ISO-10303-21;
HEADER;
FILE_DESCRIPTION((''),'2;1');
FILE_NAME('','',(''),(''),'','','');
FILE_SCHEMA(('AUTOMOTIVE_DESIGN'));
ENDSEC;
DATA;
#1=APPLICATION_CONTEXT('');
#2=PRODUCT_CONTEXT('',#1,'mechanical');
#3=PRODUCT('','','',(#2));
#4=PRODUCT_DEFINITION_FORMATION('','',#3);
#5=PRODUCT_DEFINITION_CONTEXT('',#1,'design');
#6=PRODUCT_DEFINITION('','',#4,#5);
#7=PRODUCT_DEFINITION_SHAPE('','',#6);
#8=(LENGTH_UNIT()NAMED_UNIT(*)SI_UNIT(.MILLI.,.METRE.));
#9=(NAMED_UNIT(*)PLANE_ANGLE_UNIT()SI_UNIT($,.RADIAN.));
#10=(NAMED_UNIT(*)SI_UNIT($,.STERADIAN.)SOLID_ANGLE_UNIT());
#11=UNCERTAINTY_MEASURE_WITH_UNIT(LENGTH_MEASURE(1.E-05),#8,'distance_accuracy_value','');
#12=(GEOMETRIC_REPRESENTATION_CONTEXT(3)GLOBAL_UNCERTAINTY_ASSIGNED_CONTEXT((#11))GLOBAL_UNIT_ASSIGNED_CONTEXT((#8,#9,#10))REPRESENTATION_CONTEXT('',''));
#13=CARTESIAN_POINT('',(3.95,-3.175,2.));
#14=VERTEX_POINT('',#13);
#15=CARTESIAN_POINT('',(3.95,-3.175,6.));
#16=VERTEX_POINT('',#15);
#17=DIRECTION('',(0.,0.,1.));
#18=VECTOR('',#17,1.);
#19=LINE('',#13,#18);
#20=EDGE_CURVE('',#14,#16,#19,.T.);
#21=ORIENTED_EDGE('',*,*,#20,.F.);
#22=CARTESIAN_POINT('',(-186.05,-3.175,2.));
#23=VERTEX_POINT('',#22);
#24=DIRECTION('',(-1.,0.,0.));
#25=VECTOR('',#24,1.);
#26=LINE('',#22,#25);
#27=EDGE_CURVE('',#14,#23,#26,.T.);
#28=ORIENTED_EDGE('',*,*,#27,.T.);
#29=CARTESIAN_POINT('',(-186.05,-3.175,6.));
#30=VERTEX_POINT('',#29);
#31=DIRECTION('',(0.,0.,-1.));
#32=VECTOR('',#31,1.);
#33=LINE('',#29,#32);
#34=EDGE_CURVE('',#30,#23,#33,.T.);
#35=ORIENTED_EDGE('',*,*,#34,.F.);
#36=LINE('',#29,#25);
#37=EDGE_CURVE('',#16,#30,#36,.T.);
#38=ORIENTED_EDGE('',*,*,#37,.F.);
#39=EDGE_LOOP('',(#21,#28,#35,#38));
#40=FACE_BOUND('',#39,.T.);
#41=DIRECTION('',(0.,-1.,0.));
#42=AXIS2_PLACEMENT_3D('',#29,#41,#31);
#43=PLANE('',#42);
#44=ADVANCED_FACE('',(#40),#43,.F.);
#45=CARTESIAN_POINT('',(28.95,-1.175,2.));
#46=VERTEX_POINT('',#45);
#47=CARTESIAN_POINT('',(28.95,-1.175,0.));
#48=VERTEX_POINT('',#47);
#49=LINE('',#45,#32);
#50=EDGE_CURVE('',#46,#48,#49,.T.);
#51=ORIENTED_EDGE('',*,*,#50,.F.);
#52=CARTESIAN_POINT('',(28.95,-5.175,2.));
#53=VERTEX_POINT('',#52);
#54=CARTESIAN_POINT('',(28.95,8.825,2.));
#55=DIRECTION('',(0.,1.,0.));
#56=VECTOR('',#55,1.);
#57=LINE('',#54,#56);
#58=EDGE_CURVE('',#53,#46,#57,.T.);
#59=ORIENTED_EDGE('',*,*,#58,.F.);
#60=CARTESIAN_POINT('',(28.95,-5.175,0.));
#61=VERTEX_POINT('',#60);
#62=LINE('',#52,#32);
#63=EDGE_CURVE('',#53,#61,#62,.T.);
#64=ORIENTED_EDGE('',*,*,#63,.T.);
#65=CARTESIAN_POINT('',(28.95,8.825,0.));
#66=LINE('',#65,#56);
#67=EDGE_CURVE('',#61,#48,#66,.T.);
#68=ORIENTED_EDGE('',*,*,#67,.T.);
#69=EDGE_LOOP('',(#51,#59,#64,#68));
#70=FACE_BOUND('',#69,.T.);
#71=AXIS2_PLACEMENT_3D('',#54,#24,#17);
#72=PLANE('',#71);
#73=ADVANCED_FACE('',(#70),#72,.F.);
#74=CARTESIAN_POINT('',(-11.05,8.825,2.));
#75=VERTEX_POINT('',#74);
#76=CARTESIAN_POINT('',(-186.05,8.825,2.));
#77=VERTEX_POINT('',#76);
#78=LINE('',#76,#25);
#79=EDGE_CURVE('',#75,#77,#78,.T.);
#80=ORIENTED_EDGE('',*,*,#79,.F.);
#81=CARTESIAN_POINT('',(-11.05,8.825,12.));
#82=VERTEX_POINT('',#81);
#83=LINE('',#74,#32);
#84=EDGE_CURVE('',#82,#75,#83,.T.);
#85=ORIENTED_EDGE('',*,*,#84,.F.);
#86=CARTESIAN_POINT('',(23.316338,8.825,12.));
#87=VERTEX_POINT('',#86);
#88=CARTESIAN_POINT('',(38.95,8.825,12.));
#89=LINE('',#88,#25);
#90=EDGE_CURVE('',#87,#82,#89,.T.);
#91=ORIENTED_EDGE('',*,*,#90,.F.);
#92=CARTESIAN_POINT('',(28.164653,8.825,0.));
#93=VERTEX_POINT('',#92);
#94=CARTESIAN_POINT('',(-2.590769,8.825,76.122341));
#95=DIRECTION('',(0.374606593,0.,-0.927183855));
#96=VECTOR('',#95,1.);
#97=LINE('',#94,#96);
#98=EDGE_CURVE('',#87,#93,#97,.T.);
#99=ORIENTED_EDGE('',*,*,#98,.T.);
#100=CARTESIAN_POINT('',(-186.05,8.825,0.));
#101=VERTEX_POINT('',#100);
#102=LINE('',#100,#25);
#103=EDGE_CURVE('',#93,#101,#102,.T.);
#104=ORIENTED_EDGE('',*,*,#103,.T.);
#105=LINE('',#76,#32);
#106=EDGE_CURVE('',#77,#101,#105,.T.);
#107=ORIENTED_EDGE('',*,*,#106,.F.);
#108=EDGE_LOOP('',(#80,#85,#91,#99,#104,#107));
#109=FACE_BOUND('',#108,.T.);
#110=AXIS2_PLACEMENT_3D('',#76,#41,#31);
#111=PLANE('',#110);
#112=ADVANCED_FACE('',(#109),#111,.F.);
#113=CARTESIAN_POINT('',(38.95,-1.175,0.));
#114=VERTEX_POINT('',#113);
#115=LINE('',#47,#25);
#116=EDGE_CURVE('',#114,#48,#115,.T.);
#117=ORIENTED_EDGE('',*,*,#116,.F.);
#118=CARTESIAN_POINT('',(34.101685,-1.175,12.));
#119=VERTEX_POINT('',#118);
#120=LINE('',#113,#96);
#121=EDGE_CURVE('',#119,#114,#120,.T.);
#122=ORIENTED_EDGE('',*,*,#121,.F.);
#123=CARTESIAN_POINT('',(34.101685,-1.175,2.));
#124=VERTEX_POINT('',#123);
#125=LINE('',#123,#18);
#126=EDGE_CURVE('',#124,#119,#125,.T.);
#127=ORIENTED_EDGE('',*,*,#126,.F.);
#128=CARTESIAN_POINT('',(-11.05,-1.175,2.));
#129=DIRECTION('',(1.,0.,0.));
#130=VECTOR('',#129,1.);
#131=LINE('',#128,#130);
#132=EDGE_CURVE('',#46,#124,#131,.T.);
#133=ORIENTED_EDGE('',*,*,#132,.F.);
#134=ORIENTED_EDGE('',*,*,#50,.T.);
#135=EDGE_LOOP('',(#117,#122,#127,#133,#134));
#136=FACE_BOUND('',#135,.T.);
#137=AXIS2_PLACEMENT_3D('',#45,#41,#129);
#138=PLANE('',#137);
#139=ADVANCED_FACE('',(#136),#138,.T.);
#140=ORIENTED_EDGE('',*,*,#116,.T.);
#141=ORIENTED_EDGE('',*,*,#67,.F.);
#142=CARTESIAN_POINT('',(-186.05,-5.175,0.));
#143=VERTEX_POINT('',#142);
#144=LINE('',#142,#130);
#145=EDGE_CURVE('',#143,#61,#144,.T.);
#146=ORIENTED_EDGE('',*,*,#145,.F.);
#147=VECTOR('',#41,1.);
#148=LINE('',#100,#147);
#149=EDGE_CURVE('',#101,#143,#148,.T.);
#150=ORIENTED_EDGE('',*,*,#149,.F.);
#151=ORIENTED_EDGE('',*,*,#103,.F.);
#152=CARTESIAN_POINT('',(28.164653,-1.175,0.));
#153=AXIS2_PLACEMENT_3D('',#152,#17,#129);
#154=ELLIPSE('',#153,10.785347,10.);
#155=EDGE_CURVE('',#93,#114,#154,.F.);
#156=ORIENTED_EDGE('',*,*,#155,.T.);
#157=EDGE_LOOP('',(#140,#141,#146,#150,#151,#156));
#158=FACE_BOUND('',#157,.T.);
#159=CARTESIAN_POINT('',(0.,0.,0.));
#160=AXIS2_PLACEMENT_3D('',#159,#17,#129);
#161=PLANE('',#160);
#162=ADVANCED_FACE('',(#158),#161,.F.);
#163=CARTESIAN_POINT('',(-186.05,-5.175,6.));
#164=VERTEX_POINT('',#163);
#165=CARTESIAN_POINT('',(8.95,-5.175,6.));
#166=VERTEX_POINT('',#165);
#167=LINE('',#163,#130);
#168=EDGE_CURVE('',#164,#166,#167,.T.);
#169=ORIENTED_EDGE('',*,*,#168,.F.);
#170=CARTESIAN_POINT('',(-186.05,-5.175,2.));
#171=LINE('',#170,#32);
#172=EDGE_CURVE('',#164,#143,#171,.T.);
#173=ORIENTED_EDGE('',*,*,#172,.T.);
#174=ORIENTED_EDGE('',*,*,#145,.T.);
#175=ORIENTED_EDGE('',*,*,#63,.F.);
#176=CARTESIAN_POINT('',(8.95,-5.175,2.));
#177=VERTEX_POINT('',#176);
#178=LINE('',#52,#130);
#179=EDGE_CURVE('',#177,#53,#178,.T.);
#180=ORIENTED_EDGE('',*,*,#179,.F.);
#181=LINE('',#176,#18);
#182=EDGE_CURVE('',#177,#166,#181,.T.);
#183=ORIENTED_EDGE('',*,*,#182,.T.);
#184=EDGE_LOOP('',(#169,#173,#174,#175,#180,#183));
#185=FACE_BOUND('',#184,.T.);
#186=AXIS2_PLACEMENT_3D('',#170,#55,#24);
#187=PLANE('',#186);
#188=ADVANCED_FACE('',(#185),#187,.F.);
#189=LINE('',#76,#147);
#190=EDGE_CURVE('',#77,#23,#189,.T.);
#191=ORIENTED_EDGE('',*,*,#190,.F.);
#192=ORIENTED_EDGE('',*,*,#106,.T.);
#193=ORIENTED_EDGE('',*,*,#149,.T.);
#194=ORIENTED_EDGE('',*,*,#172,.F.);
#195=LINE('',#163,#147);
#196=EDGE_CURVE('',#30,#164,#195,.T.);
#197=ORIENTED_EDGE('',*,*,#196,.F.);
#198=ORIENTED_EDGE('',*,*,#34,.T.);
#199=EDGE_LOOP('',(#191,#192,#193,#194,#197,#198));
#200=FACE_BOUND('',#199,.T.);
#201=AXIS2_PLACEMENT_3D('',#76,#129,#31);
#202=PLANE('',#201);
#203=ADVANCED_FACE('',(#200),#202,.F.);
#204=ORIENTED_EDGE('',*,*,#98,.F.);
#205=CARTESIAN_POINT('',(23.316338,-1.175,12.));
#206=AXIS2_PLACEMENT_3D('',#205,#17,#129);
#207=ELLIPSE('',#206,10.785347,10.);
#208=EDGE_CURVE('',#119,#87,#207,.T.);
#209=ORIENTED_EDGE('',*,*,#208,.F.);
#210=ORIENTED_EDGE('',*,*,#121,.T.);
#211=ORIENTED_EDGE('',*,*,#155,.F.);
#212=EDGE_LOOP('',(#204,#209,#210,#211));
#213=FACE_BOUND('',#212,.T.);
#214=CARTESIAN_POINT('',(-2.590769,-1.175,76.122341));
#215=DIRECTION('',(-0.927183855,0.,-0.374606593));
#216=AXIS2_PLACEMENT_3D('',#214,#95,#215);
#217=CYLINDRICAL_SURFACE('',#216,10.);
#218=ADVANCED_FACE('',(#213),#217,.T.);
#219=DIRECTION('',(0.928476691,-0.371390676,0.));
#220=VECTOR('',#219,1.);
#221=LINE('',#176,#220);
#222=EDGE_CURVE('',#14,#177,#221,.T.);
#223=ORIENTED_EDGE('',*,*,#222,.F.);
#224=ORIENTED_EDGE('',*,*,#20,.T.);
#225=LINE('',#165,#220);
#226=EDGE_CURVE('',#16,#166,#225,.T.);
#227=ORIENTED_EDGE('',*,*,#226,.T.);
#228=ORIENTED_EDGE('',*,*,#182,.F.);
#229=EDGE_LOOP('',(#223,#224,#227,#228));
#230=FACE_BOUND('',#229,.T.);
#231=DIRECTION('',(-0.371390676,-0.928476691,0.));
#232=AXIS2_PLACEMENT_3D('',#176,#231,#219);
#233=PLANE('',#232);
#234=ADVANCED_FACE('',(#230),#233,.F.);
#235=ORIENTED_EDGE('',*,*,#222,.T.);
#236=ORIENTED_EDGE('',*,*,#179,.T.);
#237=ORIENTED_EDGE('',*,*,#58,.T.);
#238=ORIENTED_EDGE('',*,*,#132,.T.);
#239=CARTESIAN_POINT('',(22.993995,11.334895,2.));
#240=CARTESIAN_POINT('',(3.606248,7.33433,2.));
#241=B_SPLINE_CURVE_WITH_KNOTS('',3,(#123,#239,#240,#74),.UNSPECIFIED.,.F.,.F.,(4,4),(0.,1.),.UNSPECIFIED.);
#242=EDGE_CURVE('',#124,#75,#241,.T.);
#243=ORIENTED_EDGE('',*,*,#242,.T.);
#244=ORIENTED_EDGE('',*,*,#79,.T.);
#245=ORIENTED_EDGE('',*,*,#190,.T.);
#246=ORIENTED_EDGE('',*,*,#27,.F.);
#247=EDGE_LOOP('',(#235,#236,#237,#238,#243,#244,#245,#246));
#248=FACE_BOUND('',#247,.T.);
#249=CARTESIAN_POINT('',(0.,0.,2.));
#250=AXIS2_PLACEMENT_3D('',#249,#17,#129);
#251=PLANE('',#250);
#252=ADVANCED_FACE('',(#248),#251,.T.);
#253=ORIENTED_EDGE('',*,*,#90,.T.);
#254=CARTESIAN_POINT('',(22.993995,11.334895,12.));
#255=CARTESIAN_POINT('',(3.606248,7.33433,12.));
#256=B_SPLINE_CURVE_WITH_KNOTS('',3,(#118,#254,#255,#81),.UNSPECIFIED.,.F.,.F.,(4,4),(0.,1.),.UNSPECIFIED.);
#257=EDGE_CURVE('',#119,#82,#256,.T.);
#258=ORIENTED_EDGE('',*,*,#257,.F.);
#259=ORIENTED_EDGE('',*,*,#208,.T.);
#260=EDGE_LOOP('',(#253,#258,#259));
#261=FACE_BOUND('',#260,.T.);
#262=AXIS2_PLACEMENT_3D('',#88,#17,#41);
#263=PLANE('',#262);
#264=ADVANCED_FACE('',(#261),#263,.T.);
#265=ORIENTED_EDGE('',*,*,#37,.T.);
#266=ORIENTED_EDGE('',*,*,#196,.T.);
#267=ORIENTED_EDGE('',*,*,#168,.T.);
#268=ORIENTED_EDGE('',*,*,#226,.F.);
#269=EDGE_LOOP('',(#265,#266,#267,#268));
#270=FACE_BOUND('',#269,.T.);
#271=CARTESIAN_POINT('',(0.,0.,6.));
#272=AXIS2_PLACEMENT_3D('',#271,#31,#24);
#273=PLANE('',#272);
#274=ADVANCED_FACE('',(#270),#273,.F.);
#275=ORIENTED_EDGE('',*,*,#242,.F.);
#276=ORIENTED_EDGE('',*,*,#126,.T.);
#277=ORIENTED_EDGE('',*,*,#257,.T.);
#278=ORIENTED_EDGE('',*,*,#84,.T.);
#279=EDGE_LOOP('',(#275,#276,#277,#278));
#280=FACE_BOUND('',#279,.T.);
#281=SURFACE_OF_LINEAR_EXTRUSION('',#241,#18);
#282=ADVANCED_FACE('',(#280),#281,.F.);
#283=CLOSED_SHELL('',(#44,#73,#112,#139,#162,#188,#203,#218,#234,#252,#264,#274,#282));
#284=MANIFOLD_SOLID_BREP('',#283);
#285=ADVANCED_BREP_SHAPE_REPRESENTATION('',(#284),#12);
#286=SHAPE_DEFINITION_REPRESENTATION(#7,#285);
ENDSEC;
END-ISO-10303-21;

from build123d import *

# Parameters (mm, degrees)
SKETCH1_W           = 215
SKETCH1_H           = 14
BOSS_EXTRUDE1_DEPTH = 2
SKETCH2_W           = 215
SKETCH2_H           = 2
BOSS_EXTRUDE2_DEPTH = 4
SKETCH3_W           = 10
SKETCH3_H           = 10
BOSS_EXTRUDE3_DEPTH = 2
CUT_EXTRUDE1_DEPTH  = 4
BOSS_EXTRUDE4_START = -175
SKETCH8_W           = 10
SKETCH8_H           = 10
BOSS_EXTRUDE4_DEPTH = 50
CUT_EXTRUDE5_DEPTH  = 50
FILLET2_R           = 10
CUT_EXTRUDE6_DEPTH  = 10


with BuildPart() as part:
    # Sketch1 → Boss-Extrude1 (new body)
    with BuildSketch(Plane.XY):
        with Locations((-78.55, 1.825)):
            Rectangle(SKETCH1_W, SKETCH1_H)
    extrude(amount=BOSS_EXTRUDE1_DEPTH)

    # Sketch2 → Boss-Extrude2 (add)
    with BuildSketch(Plane.XY.offset(2)):
        with Locations((-78.55, -4.175)):
            Rectangle(SKETCH2_W, SKETCH2_H)
    extrude(amount=BOSS_EXTRUDE2_DEPTH)

    # Sketch3 → Boss-Extrude3 (add)
    with BuildSketch(Plane(origin=(0, 0, 0), x_dir=(-1, 0, 0), z_dir=(0, 0, -1))):
        with Locations((-33.95, 3.825)):
            Rectangle(SKETCH3_W, SKETCH3_H)
    extrude(amount=-BOSS_EXTRUDE3_DEPTH)

    # Sketch4 → Cut-Extrude1 (cut)
    with BuildSketch(Plane.XY.offset(6)):
        Polygon((28.95, -5.175), (8.95, -5.175), (3.95, -3.175), (28.95, -3.175), align=None)
    extrude(amount=-CUT_EXTRUDE1_DEPTH, mode=Mode.SUBTRACT)

    # Sketch8 → Boss-Extrude4 (add)
    with BuildSketch(Plane.ZY.offset(186.05).offset(BOSS_EXTRUDE4_START)):
        with Locations((7, 3.825)):
            Rectangle(SKETCH8_W, SKETCH8_H)
    extrude(amount=-BOSS_EXTRUDE4_DEPTH)

    # Sketch12 → Cut-Extrude5 (cut)
    with BuildSketch(Plane.XZ.offset(1.175)):
        Polygon((38.95, 0), (34.10168529, 12), (38.95, 12), align=None)
    extrude(amount=-CUT_EXTRUDE5_DEPTH, mode=Mode.SUBTRACT)

    # Fillet2
    fillet2_edges = [part.edges().sort_by_distance(p)[0] for p in [
        (36.525842645, 8.825, 6),
    ]]
    fillet(fillet2_edges, radius=FILLET2_R - 0.0001)  # a hair under: the kernel refuses the full size

    # Sketch13 → Cut-Extrude6 (cut)
    with BuildSketch(Plane.XY.offset(12)):
        with BuildLine():
            Line((-11.05, 8.825), (-11.05, -1.175))
            Line((-11.05, -1.175), (34.10168529, -1.175))
            add(Edge.make_bspline(
                [(-11.05, 8.825), (3.606248202, 7.334330419), (22.993995007, 11.334895317), (34.10168529, -1.175)],
                knots=[0, 0, 0, 0, 1, 1, 1, 1], degree=3))
        make_face()
    extrude(amount=-CUT_EXTRUDE6_DEPTH, mode=Mode.SUBTRACT)


solid = part.part
